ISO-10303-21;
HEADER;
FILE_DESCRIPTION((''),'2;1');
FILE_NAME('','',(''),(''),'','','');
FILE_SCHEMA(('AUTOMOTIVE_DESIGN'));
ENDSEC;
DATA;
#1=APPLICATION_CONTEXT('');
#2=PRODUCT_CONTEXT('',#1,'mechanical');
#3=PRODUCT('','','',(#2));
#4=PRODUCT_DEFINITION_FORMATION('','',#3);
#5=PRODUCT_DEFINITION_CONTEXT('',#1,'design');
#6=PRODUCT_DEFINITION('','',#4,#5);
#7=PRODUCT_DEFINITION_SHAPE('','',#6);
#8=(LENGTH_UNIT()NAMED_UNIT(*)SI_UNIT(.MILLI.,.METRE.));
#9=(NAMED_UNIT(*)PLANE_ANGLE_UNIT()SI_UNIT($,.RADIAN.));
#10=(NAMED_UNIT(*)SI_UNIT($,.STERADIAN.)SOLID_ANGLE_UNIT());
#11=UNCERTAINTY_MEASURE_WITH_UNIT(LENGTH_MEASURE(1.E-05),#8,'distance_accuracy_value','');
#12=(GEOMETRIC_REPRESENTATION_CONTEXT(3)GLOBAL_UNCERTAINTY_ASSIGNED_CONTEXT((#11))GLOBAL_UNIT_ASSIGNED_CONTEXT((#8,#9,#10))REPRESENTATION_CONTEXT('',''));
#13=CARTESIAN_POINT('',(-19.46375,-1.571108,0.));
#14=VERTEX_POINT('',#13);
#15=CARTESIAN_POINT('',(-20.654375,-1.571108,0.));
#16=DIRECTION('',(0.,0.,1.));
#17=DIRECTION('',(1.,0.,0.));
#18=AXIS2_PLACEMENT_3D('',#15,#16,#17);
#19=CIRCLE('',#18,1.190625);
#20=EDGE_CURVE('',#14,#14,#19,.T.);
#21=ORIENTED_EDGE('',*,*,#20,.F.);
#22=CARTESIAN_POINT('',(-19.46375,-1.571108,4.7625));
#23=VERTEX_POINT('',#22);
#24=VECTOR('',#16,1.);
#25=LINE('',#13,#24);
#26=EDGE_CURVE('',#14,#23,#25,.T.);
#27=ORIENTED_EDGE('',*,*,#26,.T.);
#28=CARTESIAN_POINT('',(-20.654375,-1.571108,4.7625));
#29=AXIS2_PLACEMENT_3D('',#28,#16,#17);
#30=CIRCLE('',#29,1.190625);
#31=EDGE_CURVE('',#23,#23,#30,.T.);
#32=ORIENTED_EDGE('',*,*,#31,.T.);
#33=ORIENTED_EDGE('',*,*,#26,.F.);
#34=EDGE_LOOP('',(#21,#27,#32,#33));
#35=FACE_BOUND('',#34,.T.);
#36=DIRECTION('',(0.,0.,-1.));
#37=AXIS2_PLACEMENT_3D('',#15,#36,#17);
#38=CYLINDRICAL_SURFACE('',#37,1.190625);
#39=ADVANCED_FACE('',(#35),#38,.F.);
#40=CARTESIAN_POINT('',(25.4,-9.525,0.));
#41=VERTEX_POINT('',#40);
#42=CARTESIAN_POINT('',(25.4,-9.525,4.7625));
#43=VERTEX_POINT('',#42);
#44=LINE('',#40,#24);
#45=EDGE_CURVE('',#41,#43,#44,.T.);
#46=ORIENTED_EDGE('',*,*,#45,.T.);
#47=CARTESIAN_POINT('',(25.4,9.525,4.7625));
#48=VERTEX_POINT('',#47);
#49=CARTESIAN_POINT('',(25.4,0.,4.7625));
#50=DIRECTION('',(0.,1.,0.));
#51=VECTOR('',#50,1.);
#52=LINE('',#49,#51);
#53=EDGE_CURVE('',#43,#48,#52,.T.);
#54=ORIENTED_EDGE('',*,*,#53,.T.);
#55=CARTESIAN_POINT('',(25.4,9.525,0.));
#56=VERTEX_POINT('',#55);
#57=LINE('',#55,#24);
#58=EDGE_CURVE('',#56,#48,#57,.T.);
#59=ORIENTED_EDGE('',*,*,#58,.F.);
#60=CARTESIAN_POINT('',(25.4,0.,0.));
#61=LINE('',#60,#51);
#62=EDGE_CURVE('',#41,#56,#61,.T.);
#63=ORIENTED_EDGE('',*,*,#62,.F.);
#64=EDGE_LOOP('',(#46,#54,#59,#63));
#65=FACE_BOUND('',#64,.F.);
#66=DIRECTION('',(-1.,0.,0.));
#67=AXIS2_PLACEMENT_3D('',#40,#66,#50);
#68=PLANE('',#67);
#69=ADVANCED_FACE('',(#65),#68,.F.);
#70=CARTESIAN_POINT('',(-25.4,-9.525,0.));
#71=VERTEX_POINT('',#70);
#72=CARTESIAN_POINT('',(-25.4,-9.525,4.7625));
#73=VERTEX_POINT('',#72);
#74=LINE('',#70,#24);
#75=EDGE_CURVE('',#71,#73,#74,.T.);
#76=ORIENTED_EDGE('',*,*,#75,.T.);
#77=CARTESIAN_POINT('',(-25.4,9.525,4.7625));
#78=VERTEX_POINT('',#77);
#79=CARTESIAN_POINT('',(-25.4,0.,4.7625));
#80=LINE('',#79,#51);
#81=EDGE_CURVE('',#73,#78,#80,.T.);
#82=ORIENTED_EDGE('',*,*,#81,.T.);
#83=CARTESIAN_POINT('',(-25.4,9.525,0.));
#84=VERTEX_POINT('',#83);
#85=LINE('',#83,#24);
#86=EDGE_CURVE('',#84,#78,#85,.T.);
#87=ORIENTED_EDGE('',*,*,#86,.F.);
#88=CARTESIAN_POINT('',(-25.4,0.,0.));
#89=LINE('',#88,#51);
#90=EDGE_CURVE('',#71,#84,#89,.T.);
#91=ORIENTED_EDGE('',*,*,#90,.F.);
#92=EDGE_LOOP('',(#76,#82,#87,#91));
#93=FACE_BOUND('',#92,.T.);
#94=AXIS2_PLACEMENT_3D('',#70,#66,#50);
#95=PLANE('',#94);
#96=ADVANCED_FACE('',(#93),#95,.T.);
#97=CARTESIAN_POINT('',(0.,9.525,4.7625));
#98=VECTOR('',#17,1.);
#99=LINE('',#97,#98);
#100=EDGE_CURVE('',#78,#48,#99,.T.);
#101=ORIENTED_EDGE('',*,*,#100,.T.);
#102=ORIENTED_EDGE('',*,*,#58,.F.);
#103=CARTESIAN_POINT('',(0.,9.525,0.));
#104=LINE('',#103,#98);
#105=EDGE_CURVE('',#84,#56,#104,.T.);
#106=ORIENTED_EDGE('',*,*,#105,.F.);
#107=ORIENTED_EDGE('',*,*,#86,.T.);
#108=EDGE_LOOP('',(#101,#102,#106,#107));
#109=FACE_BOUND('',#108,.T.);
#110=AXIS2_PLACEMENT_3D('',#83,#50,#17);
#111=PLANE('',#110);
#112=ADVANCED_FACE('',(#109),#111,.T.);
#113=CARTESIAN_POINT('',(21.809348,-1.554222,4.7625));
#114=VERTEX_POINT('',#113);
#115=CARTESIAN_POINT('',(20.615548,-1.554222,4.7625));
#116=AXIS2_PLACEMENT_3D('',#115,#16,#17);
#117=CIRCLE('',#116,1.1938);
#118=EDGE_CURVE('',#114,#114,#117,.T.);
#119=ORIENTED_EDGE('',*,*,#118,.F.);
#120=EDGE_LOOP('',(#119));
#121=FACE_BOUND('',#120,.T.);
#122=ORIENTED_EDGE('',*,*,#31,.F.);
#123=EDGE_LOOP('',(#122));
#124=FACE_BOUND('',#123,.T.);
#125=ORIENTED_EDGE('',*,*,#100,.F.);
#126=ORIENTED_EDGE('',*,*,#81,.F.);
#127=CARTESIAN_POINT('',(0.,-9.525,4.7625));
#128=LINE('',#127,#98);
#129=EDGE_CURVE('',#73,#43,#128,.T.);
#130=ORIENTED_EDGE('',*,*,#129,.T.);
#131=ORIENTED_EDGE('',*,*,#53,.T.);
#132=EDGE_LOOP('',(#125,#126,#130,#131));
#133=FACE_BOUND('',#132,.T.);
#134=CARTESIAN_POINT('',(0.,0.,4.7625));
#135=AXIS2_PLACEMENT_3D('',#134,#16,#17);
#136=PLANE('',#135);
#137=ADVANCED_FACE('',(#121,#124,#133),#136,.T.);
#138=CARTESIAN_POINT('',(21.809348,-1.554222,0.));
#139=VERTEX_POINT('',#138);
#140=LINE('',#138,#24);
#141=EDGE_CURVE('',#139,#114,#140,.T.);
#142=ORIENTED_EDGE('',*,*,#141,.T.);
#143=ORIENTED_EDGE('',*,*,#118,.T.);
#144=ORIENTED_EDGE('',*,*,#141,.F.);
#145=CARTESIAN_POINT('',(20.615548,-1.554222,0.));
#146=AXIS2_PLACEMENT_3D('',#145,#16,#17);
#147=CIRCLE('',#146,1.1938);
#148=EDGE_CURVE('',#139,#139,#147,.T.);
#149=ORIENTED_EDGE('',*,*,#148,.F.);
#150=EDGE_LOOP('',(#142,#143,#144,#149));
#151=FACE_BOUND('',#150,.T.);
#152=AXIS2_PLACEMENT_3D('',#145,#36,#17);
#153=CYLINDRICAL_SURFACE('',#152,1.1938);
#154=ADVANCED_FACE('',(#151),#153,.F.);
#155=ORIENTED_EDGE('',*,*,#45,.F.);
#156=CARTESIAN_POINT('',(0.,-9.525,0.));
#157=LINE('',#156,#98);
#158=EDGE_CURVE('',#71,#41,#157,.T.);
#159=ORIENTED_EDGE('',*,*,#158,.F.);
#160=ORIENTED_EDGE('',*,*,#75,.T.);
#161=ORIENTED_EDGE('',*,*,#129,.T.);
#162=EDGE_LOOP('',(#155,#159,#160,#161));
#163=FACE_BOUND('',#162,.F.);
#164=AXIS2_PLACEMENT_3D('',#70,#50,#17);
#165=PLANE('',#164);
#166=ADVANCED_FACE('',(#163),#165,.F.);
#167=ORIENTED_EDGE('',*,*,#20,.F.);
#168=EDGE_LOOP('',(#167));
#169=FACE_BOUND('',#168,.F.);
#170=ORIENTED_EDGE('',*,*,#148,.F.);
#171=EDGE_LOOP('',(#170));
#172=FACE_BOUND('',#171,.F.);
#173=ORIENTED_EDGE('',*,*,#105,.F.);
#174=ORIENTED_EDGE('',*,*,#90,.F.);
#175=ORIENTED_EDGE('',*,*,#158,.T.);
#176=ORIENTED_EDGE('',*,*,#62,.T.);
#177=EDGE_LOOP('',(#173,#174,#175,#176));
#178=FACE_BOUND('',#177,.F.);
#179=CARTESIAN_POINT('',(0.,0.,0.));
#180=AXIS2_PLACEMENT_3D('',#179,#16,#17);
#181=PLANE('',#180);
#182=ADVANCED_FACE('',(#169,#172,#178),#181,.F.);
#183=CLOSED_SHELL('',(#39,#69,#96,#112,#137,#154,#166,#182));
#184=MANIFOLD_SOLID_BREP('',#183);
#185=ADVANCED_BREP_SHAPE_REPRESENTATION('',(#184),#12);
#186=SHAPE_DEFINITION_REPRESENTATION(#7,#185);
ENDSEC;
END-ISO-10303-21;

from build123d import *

# Parameters (mm, degrees)
F0_W     = 50.8
F0_H     = 19.05
F3_DEPTH = 4.7625
F2_R     = 1.1938
F4_DEPTH = 4.7625
F1_R     = 1.190625
F5_DEPTH = 4.7625


# Not quite as in the source:
# - a length typed as a fraction of an inch, garbled in the dataset ("3 / 203.2 mm" for 3/8 in), is restored


with BuildPart() as f3:
    # F0 (on Top) → F3 (new body)
    with BuildSketch(Plane.XY):
        Rectangle(F0_W, F0_H)
    extrude(amount=F3_DEPTH)

    # F2 (on face) → F4 (cut)
    with BuildSketch(Plane.XY):
        with Locations((20.6155478954, -1.5542221954)):
            Circle(F2_R)
    extrude(amount=F4_DEPTH, mode=Mode.SUBTRACT)

    # F1 (on face) → F5 (cut)
    with BuildSketch(Plane.XY):
        with Locations((-20.6543747336, -1.571108005)):
            Circle(F1_R)
    extrude(amount=F5_DEPTH, mode=Mode.SUBTRACT)


solid = f3.part
